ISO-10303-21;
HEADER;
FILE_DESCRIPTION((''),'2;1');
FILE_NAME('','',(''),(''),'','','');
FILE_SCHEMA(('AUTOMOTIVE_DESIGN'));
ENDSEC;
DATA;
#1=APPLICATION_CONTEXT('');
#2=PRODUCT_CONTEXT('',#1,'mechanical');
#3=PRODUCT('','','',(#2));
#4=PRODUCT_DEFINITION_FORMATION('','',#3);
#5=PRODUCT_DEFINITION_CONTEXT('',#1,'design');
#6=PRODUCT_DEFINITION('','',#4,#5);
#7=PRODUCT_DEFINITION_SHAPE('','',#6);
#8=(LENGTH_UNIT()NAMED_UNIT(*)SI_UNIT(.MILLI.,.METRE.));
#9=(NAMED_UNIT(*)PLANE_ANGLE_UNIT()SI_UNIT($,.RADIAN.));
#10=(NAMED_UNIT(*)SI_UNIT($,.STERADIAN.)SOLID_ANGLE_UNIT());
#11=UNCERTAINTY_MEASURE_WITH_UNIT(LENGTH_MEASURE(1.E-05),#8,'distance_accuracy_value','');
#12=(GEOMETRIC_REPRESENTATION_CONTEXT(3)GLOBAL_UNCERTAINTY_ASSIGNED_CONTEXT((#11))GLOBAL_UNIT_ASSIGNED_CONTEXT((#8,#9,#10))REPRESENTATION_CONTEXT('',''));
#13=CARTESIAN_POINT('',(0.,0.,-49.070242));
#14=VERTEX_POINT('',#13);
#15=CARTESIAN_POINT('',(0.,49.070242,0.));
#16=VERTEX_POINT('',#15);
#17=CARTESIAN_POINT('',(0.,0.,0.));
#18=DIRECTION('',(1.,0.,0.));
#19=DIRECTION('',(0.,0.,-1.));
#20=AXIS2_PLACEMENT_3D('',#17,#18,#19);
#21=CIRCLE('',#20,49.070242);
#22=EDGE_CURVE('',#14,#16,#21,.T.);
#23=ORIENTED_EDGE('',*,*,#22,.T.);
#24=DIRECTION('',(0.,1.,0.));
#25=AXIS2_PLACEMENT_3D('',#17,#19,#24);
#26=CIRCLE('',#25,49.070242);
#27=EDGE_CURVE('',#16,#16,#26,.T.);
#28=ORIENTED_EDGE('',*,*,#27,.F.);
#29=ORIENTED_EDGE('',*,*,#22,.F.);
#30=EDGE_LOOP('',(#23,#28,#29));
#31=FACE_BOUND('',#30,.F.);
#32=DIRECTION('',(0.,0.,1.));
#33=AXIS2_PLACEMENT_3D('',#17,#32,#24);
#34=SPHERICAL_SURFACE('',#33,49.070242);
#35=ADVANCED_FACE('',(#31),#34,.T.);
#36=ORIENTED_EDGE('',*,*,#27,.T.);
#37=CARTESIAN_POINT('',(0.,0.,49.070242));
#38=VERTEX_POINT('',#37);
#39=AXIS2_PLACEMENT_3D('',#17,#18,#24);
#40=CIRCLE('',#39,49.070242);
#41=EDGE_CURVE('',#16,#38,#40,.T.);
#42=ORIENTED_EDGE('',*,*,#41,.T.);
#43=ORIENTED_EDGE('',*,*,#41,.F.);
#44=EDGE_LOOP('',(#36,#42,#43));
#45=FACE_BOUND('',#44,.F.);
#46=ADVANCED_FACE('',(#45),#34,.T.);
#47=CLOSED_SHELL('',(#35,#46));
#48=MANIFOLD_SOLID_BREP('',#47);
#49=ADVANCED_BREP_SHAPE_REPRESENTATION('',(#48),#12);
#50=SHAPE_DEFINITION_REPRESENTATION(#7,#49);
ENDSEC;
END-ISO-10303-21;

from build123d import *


with BuildPart() as f1:
    # F0 (on Right) → F1 (revolve)
    with BuildSketch(Plane.YZ):
        with BuildLine():
            ThreePointArc((0, -49.0702423129), (34.6979010939, -34.6979010939), (49.0702423129, 0))
            ThreePointArc((49.0702423129, 0), (34.6979010939, 34.6979010939), (0, 49.0702423129))
            Line((0, 49.0702423129), (0, 0))
            Line((0, 0), (0, -49.0702423129))
        make_face()
    revolve(axis=Axis((0, 0, 0), (0, 0, -1)))


solid = f1.part
